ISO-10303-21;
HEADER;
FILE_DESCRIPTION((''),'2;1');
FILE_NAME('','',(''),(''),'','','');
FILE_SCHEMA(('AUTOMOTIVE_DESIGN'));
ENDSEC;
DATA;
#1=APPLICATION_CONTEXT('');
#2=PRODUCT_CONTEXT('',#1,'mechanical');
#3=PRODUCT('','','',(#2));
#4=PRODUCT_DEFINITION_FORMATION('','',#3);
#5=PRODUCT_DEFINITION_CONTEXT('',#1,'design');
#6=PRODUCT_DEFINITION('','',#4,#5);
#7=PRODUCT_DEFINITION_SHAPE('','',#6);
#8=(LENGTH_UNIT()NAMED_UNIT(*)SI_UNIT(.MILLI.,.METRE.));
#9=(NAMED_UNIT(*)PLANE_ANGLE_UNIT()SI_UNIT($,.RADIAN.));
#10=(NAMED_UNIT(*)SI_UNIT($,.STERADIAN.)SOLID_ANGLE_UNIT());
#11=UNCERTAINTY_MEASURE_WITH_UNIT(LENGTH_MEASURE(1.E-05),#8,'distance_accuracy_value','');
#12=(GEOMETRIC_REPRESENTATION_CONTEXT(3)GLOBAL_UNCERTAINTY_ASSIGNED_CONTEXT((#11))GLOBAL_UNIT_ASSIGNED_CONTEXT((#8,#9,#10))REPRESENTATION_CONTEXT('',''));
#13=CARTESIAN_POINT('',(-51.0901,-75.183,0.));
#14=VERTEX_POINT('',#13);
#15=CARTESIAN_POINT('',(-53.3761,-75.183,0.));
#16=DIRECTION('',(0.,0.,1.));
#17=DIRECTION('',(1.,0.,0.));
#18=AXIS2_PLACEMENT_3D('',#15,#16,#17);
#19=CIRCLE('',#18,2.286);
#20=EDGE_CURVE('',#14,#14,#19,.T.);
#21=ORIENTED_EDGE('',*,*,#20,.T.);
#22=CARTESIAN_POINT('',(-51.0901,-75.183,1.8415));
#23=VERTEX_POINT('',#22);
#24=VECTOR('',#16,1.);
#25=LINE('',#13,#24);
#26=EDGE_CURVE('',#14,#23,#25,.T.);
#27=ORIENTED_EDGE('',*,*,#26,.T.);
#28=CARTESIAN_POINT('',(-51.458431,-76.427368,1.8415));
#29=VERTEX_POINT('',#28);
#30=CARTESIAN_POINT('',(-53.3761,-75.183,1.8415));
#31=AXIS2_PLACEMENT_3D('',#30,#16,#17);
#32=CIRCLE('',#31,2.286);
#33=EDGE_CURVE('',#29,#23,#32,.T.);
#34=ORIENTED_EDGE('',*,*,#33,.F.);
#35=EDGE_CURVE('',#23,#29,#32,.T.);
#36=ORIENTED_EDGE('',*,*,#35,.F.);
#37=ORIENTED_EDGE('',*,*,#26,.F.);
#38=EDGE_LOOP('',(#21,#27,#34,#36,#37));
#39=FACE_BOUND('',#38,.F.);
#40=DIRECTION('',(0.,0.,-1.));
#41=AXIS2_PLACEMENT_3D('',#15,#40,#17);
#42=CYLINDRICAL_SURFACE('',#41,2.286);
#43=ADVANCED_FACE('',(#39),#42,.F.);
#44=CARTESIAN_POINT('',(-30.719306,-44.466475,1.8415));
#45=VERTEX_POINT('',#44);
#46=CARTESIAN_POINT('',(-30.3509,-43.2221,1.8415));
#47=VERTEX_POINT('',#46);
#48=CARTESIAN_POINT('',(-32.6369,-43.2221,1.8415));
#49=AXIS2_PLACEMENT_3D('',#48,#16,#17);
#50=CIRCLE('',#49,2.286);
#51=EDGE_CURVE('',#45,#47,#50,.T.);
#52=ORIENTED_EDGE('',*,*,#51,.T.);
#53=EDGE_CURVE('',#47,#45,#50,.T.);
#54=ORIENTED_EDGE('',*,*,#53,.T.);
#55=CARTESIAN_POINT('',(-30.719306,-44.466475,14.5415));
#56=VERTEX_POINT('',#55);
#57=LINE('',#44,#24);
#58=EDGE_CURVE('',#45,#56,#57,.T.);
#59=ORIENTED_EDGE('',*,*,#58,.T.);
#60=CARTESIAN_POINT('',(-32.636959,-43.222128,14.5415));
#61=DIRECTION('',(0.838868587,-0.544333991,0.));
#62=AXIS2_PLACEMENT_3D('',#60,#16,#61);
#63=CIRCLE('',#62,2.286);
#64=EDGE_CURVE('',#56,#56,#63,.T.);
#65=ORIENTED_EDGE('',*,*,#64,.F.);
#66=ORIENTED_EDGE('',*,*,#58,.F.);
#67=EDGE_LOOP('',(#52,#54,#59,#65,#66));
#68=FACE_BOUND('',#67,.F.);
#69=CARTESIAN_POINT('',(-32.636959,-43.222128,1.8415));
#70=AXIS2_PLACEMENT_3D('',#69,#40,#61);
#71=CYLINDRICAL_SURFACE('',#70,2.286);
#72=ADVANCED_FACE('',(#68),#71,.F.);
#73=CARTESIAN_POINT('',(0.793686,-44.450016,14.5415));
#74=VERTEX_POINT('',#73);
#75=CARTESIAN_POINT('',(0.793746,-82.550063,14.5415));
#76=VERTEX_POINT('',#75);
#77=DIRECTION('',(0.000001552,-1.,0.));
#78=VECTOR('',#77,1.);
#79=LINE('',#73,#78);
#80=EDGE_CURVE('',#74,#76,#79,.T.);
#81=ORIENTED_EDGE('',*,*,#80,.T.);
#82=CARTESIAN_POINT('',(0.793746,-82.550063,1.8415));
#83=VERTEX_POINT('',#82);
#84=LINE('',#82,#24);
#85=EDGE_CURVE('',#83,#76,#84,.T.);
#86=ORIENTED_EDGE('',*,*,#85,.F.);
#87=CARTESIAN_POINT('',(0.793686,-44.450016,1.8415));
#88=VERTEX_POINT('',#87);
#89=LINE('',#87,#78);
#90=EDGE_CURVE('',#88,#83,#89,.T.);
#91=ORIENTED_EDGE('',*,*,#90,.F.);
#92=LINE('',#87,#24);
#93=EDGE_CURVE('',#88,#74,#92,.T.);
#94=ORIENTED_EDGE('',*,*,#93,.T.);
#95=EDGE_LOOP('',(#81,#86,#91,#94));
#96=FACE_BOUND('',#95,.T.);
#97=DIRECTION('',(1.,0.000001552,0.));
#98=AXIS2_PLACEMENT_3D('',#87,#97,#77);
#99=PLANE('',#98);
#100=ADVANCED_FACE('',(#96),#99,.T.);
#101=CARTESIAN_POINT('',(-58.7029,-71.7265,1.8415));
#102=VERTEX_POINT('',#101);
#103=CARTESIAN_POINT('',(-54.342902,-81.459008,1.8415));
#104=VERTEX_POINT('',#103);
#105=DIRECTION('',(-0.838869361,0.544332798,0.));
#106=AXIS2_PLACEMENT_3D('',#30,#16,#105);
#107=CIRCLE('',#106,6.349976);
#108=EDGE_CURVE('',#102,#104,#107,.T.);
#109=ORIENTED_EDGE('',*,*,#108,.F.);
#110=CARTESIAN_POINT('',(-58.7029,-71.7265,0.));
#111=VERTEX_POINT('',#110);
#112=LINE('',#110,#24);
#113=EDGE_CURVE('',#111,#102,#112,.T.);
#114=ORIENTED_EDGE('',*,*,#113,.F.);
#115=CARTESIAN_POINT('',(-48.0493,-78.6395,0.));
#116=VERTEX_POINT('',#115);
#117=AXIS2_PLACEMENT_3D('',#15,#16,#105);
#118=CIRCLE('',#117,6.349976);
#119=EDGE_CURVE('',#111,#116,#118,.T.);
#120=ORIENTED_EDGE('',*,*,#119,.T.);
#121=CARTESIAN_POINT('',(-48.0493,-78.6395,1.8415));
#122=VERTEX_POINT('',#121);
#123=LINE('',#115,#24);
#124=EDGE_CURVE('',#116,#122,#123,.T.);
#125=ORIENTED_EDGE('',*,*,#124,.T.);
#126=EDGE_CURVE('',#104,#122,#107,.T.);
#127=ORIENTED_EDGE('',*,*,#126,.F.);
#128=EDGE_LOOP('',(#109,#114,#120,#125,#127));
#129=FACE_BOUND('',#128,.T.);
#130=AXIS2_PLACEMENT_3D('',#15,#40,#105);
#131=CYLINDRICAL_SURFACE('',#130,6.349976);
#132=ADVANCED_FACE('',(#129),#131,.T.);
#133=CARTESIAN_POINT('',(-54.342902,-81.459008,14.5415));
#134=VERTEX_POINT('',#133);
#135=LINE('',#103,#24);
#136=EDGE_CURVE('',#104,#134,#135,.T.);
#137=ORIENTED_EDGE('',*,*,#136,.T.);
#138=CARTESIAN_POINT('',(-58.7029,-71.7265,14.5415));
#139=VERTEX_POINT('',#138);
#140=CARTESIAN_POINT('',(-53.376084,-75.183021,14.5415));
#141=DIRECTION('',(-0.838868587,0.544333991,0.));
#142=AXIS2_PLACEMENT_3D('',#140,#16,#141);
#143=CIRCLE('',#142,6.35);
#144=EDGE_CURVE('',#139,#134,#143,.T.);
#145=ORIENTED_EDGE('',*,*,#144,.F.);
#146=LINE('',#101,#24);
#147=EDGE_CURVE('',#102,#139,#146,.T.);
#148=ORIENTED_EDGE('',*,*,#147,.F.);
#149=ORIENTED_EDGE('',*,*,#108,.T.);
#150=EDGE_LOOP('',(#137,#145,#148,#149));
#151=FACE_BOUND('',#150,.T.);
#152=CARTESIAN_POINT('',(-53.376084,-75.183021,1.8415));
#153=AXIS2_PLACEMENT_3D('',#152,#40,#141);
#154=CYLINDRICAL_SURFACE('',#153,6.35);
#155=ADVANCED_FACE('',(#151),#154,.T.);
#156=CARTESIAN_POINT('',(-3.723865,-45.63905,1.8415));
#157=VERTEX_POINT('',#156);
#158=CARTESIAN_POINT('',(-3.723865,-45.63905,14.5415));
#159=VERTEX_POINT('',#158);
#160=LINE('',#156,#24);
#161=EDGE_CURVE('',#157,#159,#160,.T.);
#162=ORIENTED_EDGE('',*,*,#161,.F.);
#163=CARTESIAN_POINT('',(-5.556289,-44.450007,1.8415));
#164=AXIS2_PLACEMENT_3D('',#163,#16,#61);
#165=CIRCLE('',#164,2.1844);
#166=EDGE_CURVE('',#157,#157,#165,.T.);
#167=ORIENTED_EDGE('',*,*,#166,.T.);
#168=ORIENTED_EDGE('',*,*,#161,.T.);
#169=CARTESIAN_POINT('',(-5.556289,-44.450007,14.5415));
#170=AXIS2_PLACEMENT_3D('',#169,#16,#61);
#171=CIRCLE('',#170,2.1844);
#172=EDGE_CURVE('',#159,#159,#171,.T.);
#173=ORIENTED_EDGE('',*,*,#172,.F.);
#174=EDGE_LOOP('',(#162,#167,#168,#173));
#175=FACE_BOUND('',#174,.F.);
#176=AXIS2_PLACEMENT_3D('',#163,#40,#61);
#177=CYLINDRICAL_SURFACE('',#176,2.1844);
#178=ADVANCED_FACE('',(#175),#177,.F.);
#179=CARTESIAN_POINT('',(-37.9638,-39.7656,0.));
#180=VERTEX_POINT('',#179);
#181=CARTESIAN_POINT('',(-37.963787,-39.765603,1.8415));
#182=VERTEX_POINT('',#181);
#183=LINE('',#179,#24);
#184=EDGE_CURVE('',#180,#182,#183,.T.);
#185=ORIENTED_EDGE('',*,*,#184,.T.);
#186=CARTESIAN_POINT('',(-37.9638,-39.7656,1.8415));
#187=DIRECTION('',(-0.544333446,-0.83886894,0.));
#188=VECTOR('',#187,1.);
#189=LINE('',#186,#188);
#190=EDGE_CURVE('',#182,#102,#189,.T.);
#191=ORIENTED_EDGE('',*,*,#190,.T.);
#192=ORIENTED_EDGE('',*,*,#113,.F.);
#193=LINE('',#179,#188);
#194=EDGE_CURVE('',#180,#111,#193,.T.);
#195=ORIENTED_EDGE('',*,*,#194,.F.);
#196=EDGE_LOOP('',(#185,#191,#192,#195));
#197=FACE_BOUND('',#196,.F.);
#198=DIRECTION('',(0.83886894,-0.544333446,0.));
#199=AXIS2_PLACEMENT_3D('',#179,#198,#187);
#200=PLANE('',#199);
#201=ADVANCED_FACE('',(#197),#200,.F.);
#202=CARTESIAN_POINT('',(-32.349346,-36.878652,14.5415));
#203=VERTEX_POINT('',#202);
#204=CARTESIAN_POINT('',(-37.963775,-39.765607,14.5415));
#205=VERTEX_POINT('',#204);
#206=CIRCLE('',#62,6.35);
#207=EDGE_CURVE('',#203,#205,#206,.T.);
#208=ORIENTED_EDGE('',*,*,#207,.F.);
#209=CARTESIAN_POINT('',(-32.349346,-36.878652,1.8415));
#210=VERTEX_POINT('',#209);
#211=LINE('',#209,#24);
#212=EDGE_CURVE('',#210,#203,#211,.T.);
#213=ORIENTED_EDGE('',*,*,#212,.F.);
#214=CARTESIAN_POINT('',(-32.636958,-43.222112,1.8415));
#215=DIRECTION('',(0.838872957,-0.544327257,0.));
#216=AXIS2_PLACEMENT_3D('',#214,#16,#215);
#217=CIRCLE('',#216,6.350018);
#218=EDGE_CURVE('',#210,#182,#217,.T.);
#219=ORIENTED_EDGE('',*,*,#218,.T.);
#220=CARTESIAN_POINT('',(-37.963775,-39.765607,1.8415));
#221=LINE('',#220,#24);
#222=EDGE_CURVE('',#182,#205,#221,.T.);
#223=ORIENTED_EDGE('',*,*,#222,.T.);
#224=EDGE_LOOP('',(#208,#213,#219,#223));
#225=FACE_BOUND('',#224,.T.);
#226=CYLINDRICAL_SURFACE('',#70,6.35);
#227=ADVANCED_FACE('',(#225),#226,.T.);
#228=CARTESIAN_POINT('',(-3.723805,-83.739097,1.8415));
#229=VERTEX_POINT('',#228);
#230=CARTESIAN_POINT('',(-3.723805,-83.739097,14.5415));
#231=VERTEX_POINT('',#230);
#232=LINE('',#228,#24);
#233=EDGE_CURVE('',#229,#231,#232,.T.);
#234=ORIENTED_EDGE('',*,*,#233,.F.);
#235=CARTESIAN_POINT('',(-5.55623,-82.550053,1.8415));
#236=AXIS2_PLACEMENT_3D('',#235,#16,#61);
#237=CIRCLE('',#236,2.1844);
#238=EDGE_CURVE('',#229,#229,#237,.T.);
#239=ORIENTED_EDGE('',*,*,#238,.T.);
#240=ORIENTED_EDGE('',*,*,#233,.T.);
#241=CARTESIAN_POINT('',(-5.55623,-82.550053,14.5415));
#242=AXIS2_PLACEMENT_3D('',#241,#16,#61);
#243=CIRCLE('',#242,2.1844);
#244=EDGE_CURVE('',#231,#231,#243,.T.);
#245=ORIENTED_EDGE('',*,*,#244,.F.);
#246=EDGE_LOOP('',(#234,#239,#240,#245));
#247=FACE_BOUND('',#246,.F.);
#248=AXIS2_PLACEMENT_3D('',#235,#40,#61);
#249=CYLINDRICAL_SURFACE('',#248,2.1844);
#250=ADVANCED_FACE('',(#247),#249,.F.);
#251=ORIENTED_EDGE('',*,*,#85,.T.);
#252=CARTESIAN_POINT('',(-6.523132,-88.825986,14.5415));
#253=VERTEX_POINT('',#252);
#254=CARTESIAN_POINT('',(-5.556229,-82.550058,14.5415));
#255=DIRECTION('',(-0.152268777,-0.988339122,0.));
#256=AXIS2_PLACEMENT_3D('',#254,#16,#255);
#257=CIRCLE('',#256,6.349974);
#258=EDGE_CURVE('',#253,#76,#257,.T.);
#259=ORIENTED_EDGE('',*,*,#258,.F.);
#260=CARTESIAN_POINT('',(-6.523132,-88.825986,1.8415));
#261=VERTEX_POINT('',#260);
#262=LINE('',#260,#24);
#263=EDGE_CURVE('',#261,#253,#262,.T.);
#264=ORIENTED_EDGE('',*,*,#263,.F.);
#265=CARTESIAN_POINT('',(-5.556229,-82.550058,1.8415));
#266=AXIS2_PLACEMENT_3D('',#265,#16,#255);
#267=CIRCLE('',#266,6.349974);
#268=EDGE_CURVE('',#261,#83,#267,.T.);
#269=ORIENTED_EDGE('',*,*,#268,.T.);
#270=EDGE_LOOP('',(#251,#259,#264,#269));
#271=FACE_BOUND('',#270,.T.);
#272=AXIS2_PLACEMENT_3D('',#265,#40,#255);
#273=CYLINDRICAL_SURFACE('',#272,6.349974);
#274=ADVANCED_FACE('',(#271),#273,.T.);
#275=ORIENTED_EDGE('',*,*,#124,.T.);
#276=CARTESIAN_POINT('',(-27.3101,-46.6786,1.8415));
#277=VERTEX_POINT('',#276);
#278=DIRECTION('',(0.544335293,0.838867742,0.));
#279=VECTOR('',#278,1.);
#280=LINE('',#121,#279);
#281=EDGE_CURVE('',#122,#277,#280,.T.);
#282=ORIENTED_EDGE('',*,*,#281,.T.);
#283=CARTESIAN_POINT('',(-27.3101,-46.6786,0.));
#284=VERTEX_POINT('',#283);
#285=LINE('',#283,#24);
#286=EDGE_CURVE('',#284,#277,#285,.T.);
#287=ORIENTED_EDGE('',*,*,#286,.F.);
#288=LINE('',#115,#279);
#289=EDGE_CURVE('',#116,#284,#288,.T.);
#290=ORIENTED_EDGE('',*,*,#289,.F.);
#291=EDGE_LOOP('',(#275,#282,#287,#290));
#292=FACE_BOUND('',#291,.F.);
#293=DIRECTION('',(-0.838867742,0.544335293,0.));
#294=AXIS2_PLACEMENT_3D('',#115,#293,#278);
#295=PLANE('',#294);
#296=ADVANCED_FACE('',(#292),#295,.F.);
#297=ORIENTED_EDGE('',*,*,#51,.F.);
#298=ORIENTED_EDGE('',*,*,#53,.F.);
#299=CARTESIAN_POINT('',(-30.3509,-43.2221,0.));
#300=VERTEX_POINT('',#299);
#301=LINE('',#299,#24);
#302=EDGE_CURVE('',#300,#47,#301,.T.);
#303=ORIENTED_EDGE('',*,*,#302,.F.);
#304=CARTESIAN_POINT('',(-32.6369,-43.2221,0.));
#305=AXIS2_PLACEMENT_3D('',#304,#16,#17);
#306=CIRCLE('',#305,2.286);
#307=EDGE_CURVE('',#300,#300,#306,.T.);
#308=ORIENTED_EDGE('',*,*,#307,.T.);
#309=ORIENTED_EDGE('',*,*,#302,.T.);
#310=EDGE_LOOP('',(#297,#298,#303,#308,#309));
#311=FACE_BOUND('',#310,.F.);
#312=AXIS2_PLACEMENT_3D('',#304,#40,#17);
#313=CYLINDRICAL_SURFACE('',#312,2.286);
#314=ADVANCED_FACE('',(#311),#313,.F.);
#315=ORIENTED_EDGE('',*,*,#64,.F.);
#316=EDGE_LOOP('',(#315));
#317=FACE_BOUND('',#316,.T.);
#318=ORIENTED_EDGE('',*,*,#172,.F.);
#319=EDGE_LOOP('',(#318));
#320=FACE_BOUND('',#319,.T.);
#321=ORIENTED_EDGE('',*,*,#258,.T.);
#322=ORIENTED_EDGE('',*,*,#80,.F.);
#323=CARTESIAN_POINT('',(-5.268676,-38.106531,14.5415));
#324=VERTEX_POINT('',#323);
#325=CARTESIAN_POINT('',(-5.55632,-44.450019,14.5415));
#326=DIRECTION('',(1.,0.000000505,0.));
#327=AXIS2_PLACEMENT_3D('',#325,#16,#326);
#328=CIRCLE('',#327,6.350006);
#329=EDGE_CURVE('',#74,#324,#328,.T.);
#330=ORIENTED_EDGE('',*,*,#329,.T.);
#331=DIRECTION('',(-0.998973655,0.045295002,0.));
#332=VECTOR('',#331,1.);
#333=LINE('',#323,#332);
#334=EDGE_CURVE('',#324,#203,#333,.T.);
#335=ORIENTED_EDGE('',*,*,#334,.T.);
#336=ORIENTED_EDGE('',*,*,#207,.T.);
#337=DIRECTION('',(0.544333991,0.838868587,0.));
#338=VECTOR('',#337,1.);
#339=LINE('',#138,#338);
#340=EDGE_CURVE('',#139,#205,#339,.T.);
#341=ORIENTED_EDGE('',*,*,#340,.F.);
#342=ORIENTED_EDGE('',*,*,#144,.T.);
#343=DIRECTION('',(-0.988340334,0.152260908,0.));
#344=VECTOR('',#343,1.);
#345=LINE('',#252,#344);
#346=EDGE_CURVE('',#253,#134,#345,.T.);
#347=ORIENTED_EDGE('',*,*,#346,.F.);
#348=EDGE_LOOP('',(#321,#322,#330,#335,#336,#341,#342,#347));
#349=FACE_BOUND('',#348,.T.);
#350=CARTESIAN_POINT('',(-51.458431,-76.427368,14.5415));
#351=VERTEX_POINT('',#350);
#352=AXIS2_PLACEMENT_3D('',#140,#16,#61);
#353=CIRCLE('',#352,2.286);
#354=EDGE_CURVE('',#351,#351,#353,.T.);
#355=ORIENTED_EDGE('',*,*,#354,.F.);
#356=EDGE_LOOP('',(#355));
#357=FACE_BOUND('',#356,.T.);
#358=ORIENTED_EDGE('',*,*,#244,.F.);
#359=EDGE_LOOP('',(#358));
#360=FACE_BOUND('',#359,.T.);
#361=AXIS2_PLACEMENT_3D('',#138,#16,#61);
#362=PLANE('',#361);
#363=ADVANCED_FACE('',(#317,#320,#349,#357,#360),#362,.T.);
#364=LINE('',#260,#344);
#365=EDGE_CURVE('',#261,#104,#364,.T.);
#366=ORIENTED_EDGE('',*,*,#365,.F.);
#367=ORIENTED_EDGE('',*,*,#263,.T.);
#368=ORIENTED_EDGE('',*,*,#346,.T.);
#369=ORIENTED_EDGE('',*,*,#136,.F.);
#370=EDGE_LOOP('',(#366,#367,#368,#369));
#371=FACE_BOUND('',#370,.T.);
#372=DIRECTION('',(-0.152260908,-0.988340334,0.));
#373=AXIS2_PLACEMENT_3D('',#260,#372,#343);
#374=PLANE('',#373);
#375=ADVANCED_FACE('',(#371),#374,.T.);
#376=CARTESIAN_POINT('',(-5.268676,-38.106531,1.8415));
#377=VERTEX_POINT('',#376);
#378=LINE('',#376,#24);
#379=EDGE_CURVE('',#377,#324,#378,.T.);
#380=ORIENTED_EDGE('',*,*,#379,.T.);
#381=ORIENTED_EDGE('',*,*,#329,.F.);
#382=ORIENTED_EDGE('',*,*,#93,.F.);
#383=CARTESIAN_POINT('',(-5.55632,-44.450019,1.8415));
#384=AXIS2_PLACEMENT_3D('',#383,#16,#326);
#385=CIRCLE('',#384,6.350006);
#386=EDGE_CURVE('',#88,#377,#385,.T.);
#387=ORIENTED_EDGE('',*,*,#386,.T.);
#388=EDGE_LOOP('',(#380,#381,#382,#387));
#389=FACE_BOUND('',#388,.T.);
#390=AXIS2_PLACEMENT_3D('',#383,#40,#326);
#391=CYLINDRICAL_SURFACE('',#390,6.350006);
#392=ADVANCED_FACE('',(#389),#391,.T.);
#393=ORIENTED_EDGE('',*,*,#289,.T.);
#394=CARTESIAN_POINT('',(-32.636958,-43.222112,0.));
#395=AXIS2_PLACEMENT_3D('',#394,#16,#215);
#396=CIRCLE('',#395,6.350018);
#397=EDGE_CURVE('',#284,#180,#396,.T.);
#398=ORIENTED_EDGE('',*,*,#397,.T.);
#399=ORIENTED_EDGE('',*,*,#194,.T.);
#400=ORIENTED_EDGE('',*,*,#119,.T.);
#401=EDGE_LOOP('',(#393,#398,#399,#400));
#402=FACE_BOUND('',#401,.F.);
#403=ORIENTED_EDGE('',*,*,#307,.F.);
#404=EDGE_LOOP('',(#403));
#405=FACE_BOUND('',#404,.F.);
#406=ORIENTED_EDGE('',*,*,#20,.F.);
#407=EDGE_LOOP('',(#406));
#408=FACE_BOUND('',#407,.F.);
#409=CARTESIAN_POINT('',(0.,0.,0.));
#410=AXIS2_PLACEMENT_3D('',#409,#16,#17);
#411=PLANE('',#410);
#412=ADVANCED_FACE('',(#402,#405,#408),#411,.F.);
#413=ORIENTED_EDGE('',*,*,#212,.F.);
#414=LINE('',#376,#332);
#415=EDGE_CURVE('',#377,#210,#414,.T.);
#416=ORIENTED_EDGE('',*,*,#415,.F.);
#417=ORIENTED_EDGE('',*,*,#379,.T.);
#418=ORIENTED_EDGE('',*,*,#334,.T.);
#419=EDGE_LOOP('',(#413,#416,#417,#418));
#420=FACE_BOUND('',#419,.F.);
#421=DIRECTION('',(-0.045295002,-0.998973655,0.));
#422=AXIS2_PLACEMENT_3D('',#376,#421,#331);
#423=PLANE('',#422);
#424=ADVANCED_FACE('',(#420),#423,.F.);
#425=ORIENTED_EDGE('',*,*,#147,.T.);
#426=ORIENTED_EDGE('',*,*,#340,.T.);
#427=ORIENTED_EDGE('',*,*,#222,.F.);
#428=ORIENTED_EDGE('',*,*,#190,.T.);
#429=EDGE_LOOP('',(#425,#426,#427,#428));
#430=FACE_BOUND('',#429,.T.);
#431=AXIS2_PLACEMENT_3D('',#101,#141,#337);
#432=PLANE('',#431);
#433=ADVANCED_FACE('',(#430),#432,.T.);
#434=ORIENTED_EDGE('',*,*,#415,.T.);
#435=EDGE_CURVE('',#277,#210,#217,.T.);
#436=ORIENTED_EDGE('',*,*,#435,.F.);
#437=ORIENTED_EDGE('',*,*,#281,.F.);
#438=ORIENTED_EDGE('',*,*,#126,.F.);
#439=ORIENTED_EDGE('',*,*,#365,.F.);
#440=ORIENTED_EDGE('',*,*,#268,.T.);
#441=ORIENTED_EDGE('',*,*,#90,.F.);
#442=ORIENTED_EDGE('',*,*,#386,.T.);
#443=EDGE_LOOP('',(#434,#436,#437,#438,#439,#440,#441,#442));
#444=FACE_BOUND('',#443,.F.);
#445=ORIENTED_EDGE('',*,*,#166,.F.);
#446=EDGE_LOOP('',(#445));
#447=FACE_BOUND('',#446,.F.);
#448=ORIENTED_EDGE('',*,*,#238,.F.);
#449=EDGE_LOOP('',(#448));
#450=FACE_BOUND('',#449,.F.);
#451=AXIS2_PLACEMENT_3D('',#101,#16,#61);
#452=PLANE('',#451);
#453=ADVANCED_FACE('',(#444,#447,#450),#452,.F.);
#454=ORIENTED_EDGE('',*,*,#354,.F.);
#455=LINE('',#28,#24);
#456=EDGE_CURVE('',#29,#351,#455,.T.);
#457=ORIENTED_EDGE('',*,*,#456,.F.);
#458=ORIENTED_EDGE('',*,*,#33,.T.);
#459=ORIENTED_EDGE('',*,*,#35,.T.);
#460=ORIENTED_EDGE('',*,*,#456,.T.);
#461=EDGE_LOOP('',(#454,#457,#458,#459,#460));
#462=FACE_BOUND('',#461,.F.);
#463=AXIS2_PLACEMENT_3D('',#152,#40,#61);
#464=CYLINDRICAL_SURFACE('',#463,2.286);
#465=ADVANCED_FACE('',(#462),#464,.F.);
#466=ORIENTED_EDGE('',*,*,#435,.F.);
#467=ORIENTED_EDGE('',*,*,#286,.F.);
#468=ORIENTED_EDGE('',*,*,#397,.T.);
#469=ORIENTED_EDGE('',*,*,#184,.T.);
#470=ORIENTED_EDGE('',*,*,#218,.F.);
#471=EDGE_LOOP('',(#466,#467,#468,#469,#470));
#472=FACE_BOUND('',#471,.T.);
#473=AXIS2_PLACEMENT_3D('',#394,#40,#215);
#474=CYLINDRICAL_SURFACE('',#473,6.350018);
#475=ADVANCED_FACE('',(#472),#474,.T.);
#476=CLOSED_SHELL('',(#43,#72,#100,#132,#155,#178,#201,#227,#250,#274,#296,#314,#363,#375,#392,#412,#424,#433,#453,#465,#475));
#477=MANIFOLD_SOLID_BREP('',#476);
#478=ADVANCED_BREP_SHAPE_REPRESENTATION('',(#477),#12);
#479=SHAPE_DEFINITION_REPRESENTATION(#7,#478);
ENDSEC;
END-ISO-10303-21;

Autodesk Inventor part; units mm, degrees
ref_plane "YZ Plane" through (0, 0, 0) normal (1, 0, 0) x (0, 1, 0)
ref_plane "XZ Plane" through (0, 0, 0) normal (0, 1, 0) x (-1, 0, 0)
ref_plane "Work Plane1" through (0, 0, 0) normal (0, 0, 1) x (1, 0, 0)
sketch "Sketch1" plane through (0, 0, 0) normal (0, 0, 1) x (1, 0, 0)
  circle A0 centre (-53.3761, -75.183) radius 2.286 projected
  circle A1 centre (-32.6369, -43.2221) radius 2.286 projected
  line L0 (-53.3761, -75.183) -> (-32.6369, -43.2221) construction
  line L1 (-48.0493, -78.6395) -> (-27.3101, -46.6786)
  line L2 (-37.9638, -39.7656) -> (-58.7029, -71.7265)
  arc A2 (-58.7029, -71.7265) -> (-48.0493, -78.6395) centre (-53.3761, -75.183) ccw
  arc A3 (-27.3101, -46.6786) -> (-37.9638, -39.7656) centre (-32.6369, -43.2221) ccw
  line L3 (-55.5272, -90.1636) -> (-13.3531, -25.1695) projected
  point P0 (0, 0)
  point P1 (-43.0065, -59.2025)
ref_plane "Work Plane2" through (-11.9062, -368.3, 1.8415) normal (0, 0, 1) x (1, 0, 0)
extrude "Extrusion1" add sketch "Sketch1" along normal up to surface (1.8415 mm away)
sketch "Sketch2" plane through (-58.7029, -71.7265, 1.8415) normal (0, 0, 1) x (0.8388686, -0.544334, 0)
  circle A0 centre (29.7355, 51.8109) radius 2.1844 projected
  circle A1 centre (50.4747, 19.85) radius 2.1844 projected
  line L0 (0, 0) -> (0, 38.1) projected
  arc A2 (0, 0) -> (12.7, 0) centre (6.35, 0) ccw projected
  line L1 (12.7, 38.1) -> (12.7, 0) projected
  arc A3 (12.7, 38.1) -> (0, 38.1) centre (6.35, 38.1) ccw projected
  circle A4 centre (6.35, 0) radius 2.286 projected
  circle A5 centre (6.35, 38.1) radius 2.286 projected
  arc A6 (35.0623, 55.2674) -> (26.5238, 57.2888) centre (29.7355, 51.8109) ccw
  arc A7 (53.0798, 14.059) -> (55.8015, 23.3065) centre (50.4747, 19.85) ccw
  line L2 (26.5238, 57.2888) -> (3.1383, 43.5779)
  line L3 (35.0623, 55.2674) -> (55.8015, 23.3065)
  line L4 (53.0798, 14.059) -> (8.9552, -5.791)
  point P0 (10.2009, 92.1231)
  dimension "d2" = 12.7
  dimension "d3" = 12.7
extrude "Extrusion2" add sketch "Sketch2" along normal blind 12.7
properties part number "Intake"
